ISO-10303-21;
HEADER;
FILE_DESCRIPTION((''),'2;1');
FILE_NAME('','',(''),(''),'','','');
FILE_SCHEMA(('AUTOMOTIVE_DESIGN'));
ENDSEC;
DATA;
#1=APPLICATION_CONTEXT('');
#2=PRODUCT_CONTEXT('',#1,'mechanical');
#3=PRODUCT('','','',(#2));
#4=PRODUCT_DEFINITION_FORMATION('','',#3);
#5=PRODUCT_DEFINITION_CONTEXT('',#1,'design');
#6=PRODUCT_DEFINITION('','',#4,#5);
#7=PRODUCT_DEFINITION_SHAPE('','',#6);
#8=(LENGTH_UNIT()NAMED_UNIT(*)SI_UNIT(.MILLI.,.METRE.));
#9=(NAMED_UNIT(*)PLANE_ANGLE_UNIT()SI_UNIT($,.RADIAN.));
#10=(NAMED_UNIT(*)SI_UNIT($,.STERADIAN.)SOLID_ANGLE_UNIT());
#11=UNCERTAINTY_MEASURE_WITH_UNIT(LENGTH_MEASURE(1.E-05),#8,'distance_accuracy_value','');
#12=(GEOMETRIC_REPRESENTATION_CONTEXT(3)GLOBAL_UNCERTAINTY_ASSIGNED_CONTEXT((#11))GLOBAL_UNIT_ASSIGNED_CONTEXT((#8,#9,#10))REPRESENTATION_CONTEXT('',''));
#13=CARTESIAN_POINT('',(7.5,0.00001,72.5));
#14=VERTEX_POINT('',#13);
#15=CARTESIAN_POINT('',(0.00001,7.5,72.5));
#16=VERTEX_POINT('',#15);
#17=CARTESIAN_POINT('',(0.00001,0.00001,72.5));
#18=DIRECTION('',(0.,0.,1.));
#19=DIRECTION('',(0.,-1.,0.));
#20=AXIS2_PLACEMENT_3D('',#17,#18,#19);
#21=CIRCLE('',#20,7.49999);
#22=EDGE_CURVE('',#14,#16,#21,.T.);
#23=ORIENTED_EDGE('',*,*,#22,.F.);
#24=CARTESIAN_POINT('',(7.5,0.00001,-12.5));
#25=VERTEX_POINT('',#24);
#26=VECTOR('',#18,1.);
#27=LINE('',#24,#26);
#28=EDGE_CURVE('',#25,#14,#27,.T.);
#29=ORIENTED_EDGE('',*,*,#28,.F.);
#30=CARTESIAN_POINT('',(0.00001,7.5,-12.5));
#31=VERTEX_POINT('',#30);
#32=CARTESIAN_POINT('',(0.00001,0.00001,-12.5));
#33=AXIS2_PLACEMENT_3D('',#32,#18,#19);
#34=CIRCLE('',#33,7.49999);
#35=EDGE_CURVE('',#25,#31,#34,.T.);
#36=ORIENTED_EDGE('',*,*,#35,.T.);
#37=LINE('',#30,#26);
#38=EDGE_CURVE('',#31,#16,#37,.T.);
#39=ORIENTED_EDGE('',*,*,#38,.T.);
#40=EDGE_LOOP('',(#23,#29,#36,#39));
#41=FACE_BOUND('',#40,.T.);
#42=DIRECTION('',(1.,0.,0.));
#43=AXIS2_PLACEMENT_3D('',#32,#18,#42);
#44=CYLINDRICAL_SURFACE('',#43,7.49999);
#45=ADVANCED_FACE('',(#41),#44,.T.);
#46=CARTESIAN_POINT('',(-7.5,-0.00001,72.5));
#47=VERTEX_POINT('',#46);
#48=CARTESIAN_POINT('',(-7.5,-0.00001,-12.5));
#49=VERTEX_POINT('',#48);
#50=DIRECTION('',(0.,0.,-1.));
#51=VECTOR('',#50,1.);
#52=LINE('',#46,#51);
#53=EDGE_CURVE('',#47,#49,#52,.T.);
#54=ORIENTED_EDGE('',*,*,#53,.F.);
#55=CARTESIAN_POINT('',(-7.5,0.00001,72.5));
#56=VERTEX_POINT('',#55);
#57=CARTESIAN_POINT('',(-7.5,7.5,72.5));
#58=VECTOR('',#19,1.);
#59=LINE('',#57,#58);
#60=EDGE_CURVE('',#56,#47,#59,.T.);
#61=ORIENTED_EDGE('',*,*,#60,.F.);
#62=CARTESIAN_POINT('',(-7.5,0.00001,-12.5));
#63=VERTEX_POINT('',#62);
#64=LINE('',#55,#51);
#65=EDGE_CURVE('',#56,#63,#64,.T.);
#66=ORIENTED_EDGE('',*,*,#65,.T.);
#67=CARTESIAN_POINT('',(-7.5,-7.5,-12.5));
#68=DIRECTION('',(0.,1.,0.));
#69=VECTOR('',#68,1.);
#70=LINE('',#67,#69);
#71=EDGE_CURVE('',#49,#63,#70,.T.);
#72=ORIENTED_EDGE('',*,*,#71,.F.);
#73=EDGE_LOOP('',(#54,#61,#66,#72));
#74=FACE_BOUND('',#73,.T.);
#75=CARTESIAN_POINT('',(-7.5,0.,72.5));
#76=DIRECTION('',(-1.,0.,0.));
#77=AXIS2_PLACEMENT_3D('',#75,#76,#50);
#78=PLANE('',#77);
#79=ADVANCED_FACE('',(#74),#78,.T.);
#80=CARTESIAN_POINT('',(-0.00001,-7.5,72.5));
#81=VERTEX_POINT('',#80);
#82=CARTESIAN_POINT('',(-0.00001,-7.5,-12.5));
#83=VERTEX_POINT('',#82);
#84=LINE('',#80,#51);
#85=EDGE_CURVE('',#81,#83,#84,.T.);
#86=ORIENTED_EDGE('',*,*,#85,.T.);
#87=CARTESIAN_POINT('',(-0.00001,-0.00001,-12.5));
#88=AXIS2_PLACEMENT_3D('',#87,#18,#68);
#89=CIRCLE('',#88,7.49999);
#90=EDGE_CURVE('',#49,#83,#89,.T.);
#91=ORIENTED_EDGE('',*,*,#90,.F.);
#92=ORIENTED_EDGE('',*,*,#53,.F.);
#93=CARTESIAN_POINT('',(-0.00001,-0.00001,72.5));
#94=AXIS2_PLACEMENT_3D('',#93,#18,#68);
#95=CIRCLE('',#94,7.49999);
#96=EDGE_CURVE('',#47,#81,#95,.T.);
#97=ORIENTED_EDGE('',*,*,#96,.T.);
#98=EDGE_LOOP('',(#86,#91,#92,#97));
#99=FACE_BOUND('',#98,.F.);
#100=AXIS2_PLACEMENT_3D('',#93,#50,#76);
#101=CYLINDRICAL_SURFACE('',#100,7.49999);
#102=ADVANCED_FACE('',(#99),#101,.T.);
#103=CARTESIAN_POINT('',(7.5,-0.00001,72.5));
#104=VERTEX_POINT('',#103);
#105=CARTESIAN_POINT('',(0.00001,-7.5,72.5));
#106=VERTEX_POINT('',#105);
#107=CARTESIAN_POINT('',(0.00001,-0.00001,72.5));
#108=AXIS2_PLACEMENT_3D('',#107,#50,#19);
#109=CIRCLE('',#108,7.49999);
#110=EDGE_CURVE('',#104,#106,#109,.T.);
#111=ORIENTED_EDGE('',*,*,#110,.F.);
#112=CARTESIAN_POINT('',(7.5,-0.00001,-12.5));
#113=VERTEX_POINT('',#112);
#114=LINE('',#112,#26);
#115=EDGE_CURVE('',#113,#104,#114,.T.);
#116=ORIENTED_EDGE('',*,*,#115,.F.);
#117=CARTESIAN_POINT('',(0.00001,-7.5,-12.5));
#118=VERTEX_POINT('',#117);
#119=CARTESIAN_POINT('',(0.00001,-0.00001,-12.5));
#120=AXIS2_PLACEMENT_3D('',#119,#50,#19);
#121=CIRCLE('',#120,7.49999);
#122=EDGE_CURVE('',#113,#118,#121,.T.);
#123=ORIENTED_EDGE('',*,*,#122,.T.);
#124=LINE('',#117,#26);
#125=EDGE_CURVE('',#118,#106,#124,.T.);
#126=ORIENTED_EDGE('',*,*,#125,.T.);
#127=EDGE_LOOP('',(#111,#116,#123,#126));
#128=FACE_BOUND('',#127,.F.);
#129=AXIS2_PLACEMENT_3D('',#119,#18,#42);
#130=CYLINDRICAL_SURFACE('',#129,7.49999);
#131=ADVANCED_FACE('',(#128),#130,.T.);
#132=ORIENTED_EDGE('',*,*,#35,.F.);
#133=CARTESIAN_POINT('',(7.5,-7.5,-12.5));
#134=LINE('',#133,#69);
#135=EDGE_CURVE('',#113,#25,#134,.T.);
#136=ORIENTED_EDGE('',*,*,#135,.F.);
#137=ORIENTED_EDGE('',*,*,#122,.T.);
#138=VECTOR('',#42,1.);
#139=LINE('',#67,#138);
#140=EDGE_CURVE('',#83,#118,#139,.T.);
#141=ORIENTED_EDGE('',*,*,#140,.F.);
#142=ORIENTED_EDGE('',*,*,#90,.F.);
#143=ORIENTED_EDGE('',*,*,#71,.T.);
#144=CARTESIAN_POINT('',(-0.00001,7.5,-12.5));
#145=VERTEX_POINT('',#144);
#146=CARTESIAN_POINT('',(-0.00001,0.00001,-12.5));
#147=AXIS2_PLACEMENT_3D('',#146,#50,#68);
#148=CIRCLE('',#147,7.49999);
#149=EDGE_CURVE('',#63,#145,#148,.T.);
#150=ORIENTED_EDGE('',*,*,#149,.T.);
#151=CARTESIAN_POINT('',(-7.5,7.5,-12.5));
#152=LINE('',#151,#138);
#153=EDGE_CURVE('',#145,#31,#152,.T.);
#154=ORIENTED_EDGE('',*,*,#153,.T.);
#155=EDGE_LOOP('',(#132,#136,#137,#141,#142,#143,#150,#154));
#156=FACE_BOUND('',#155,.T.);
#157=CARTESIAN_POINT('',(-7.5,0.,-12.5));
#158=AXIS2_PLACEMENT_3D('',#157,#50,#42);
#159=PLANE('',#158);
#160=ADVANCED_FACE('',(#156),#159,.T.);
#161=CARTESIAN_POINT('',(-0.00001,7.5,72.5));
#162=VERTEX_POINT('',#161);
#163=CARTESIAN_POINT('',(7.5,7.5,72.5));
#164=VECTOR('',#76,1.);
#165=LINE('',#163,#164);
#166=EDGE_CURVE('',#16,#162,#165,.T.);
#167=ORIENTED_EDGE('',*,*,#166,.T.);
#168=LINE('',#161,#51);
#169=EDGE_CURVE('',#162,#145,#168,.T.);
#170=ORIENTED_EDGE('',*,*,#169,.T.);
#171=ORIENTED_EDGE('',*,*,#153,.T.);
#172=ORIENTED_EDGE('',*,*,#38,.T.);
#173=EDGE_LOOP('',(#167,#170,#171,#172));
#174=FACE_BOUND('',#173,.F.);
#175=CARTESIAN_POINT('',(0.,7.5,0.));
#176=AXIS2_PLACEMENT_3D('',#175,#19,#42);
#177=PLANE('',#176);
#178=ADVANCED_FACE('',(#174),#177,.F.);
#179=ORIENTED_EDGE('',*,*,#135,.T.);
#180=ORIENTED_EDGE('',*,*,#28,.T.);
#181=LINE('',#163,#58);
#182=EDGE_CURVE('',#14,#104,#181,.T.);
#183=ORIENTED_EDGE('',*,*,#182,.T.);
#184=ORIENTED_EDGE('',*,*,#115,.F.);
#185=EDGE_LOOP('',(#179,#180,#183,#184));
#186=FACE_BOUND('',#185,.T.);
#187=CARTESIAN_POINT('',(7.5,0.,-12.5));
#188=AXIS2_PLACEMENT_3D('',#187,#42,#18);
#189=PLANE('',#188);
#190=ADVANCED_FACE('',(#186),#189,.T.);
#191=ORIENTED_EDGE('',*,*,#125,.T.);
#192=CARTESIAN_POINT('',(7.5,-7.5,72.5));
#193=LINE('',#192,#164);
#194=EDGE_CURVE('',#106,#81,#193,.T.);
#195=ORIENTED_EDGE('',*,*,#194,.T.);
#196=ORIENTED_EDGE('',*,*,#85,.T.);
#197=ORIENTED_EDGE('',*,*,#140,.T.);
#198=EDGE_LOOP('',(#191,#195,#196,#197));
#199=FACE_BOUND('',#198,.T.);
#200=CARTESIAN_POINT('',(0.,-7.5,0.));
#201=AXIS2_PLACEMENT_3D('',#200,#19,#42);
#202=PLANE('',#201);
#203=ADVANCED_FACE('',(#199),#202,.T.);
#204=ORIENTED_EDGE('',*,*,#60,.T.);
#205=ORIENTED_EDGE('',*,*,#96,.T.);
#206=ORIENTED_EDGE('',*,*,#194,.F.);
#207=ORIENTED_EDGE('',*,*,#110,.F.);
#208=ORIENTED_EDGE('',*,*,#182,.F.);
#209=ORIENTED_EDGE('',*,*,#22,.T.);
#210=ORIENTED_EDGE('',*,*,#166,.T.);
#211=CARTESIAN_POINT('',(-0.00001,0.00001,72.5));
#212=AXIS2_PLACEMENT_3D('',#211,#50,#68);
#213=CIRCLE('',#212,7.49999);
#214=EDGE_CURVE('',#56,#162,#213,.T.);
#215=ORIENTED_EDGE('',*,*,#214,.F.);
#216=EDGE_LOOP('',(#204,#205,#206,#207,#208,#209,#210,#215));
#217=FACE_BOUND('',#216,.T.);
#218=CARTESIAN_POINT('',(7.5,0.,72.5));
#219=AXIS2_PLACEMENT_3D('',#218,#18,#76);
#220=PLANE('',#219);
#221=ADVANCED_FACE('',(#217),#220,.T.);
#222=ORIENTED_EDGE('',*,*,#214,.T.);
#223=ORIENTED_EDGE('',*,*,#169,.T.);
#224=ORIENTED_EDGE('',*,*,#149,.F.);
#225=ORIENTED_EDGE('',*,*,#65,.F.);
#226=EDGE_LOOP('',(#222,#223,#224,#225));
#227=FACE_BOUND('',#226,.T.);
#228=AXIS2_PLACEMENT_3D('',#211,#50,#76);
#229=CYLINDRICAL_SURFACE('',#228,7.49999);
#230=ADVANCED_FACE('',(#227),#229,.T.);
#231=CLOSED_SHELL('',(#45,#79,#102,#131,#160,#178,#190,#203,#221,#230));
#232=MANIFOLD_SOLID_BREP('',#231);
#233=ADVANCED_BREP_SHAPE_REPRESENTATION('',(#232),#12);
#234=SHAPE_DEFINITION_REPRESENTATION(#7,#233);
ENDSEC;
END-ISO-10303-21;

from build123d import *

# Parameters (mm, degrees)
F0_W          = 7.5
F0_H          = 35
F0_H_2        = 25
F1_DEPTH      = 7.5
F1_DEPTH_BACK = 7.5
F2_R          = 7.49999


# Not quite as in the source:
# - a fillet or chamfer is up to 0.001 mm smaller than in the source, because OpenCascade refuses the exact size


with BuildPart() as f1:
    # F0 (on Front) → F1 (new body, two sides)
    with BuildSketch(Plane.XZ) as f1_sk:
        Polygon((7.5, -12.5), (7.5, 12.5), (0, 12.5), (-7.5, 12.5), (-7.5, -12.5), align=None)
        with Locations((3.75, 30)):
            Rectangle(F0_W, F0_H)
        with Locations((-3.75, 60)):
            Rectangle(F0_W, F0_H_2)
        with Locations((3.75, 60)):
            Rectangle(F0_W, F0_H_2)
        with Locations((-3.75, 30)):
            Rectangle(F0_W, F0_H)
    extrude(amount=F1_DEPTH)
    extrude(f1_sk.sketch, amount=-F1_DEPTH_BACK)

    # F2 (radius 7.5 in the source; OpenCascade refuses exactly that, so slightly less here)
    f2_edges = [f1.edges().sort_by_distance(p)[0] for p in [
        (-7.5, -7.5, 30),
        (7.5, -7.5, 30),
        (-7.5, 7.5, 30),
        (7.5, 7.5, 30),
    ]]
    fillet(f2_edges, radius=F2_R)


solid = f1.part
